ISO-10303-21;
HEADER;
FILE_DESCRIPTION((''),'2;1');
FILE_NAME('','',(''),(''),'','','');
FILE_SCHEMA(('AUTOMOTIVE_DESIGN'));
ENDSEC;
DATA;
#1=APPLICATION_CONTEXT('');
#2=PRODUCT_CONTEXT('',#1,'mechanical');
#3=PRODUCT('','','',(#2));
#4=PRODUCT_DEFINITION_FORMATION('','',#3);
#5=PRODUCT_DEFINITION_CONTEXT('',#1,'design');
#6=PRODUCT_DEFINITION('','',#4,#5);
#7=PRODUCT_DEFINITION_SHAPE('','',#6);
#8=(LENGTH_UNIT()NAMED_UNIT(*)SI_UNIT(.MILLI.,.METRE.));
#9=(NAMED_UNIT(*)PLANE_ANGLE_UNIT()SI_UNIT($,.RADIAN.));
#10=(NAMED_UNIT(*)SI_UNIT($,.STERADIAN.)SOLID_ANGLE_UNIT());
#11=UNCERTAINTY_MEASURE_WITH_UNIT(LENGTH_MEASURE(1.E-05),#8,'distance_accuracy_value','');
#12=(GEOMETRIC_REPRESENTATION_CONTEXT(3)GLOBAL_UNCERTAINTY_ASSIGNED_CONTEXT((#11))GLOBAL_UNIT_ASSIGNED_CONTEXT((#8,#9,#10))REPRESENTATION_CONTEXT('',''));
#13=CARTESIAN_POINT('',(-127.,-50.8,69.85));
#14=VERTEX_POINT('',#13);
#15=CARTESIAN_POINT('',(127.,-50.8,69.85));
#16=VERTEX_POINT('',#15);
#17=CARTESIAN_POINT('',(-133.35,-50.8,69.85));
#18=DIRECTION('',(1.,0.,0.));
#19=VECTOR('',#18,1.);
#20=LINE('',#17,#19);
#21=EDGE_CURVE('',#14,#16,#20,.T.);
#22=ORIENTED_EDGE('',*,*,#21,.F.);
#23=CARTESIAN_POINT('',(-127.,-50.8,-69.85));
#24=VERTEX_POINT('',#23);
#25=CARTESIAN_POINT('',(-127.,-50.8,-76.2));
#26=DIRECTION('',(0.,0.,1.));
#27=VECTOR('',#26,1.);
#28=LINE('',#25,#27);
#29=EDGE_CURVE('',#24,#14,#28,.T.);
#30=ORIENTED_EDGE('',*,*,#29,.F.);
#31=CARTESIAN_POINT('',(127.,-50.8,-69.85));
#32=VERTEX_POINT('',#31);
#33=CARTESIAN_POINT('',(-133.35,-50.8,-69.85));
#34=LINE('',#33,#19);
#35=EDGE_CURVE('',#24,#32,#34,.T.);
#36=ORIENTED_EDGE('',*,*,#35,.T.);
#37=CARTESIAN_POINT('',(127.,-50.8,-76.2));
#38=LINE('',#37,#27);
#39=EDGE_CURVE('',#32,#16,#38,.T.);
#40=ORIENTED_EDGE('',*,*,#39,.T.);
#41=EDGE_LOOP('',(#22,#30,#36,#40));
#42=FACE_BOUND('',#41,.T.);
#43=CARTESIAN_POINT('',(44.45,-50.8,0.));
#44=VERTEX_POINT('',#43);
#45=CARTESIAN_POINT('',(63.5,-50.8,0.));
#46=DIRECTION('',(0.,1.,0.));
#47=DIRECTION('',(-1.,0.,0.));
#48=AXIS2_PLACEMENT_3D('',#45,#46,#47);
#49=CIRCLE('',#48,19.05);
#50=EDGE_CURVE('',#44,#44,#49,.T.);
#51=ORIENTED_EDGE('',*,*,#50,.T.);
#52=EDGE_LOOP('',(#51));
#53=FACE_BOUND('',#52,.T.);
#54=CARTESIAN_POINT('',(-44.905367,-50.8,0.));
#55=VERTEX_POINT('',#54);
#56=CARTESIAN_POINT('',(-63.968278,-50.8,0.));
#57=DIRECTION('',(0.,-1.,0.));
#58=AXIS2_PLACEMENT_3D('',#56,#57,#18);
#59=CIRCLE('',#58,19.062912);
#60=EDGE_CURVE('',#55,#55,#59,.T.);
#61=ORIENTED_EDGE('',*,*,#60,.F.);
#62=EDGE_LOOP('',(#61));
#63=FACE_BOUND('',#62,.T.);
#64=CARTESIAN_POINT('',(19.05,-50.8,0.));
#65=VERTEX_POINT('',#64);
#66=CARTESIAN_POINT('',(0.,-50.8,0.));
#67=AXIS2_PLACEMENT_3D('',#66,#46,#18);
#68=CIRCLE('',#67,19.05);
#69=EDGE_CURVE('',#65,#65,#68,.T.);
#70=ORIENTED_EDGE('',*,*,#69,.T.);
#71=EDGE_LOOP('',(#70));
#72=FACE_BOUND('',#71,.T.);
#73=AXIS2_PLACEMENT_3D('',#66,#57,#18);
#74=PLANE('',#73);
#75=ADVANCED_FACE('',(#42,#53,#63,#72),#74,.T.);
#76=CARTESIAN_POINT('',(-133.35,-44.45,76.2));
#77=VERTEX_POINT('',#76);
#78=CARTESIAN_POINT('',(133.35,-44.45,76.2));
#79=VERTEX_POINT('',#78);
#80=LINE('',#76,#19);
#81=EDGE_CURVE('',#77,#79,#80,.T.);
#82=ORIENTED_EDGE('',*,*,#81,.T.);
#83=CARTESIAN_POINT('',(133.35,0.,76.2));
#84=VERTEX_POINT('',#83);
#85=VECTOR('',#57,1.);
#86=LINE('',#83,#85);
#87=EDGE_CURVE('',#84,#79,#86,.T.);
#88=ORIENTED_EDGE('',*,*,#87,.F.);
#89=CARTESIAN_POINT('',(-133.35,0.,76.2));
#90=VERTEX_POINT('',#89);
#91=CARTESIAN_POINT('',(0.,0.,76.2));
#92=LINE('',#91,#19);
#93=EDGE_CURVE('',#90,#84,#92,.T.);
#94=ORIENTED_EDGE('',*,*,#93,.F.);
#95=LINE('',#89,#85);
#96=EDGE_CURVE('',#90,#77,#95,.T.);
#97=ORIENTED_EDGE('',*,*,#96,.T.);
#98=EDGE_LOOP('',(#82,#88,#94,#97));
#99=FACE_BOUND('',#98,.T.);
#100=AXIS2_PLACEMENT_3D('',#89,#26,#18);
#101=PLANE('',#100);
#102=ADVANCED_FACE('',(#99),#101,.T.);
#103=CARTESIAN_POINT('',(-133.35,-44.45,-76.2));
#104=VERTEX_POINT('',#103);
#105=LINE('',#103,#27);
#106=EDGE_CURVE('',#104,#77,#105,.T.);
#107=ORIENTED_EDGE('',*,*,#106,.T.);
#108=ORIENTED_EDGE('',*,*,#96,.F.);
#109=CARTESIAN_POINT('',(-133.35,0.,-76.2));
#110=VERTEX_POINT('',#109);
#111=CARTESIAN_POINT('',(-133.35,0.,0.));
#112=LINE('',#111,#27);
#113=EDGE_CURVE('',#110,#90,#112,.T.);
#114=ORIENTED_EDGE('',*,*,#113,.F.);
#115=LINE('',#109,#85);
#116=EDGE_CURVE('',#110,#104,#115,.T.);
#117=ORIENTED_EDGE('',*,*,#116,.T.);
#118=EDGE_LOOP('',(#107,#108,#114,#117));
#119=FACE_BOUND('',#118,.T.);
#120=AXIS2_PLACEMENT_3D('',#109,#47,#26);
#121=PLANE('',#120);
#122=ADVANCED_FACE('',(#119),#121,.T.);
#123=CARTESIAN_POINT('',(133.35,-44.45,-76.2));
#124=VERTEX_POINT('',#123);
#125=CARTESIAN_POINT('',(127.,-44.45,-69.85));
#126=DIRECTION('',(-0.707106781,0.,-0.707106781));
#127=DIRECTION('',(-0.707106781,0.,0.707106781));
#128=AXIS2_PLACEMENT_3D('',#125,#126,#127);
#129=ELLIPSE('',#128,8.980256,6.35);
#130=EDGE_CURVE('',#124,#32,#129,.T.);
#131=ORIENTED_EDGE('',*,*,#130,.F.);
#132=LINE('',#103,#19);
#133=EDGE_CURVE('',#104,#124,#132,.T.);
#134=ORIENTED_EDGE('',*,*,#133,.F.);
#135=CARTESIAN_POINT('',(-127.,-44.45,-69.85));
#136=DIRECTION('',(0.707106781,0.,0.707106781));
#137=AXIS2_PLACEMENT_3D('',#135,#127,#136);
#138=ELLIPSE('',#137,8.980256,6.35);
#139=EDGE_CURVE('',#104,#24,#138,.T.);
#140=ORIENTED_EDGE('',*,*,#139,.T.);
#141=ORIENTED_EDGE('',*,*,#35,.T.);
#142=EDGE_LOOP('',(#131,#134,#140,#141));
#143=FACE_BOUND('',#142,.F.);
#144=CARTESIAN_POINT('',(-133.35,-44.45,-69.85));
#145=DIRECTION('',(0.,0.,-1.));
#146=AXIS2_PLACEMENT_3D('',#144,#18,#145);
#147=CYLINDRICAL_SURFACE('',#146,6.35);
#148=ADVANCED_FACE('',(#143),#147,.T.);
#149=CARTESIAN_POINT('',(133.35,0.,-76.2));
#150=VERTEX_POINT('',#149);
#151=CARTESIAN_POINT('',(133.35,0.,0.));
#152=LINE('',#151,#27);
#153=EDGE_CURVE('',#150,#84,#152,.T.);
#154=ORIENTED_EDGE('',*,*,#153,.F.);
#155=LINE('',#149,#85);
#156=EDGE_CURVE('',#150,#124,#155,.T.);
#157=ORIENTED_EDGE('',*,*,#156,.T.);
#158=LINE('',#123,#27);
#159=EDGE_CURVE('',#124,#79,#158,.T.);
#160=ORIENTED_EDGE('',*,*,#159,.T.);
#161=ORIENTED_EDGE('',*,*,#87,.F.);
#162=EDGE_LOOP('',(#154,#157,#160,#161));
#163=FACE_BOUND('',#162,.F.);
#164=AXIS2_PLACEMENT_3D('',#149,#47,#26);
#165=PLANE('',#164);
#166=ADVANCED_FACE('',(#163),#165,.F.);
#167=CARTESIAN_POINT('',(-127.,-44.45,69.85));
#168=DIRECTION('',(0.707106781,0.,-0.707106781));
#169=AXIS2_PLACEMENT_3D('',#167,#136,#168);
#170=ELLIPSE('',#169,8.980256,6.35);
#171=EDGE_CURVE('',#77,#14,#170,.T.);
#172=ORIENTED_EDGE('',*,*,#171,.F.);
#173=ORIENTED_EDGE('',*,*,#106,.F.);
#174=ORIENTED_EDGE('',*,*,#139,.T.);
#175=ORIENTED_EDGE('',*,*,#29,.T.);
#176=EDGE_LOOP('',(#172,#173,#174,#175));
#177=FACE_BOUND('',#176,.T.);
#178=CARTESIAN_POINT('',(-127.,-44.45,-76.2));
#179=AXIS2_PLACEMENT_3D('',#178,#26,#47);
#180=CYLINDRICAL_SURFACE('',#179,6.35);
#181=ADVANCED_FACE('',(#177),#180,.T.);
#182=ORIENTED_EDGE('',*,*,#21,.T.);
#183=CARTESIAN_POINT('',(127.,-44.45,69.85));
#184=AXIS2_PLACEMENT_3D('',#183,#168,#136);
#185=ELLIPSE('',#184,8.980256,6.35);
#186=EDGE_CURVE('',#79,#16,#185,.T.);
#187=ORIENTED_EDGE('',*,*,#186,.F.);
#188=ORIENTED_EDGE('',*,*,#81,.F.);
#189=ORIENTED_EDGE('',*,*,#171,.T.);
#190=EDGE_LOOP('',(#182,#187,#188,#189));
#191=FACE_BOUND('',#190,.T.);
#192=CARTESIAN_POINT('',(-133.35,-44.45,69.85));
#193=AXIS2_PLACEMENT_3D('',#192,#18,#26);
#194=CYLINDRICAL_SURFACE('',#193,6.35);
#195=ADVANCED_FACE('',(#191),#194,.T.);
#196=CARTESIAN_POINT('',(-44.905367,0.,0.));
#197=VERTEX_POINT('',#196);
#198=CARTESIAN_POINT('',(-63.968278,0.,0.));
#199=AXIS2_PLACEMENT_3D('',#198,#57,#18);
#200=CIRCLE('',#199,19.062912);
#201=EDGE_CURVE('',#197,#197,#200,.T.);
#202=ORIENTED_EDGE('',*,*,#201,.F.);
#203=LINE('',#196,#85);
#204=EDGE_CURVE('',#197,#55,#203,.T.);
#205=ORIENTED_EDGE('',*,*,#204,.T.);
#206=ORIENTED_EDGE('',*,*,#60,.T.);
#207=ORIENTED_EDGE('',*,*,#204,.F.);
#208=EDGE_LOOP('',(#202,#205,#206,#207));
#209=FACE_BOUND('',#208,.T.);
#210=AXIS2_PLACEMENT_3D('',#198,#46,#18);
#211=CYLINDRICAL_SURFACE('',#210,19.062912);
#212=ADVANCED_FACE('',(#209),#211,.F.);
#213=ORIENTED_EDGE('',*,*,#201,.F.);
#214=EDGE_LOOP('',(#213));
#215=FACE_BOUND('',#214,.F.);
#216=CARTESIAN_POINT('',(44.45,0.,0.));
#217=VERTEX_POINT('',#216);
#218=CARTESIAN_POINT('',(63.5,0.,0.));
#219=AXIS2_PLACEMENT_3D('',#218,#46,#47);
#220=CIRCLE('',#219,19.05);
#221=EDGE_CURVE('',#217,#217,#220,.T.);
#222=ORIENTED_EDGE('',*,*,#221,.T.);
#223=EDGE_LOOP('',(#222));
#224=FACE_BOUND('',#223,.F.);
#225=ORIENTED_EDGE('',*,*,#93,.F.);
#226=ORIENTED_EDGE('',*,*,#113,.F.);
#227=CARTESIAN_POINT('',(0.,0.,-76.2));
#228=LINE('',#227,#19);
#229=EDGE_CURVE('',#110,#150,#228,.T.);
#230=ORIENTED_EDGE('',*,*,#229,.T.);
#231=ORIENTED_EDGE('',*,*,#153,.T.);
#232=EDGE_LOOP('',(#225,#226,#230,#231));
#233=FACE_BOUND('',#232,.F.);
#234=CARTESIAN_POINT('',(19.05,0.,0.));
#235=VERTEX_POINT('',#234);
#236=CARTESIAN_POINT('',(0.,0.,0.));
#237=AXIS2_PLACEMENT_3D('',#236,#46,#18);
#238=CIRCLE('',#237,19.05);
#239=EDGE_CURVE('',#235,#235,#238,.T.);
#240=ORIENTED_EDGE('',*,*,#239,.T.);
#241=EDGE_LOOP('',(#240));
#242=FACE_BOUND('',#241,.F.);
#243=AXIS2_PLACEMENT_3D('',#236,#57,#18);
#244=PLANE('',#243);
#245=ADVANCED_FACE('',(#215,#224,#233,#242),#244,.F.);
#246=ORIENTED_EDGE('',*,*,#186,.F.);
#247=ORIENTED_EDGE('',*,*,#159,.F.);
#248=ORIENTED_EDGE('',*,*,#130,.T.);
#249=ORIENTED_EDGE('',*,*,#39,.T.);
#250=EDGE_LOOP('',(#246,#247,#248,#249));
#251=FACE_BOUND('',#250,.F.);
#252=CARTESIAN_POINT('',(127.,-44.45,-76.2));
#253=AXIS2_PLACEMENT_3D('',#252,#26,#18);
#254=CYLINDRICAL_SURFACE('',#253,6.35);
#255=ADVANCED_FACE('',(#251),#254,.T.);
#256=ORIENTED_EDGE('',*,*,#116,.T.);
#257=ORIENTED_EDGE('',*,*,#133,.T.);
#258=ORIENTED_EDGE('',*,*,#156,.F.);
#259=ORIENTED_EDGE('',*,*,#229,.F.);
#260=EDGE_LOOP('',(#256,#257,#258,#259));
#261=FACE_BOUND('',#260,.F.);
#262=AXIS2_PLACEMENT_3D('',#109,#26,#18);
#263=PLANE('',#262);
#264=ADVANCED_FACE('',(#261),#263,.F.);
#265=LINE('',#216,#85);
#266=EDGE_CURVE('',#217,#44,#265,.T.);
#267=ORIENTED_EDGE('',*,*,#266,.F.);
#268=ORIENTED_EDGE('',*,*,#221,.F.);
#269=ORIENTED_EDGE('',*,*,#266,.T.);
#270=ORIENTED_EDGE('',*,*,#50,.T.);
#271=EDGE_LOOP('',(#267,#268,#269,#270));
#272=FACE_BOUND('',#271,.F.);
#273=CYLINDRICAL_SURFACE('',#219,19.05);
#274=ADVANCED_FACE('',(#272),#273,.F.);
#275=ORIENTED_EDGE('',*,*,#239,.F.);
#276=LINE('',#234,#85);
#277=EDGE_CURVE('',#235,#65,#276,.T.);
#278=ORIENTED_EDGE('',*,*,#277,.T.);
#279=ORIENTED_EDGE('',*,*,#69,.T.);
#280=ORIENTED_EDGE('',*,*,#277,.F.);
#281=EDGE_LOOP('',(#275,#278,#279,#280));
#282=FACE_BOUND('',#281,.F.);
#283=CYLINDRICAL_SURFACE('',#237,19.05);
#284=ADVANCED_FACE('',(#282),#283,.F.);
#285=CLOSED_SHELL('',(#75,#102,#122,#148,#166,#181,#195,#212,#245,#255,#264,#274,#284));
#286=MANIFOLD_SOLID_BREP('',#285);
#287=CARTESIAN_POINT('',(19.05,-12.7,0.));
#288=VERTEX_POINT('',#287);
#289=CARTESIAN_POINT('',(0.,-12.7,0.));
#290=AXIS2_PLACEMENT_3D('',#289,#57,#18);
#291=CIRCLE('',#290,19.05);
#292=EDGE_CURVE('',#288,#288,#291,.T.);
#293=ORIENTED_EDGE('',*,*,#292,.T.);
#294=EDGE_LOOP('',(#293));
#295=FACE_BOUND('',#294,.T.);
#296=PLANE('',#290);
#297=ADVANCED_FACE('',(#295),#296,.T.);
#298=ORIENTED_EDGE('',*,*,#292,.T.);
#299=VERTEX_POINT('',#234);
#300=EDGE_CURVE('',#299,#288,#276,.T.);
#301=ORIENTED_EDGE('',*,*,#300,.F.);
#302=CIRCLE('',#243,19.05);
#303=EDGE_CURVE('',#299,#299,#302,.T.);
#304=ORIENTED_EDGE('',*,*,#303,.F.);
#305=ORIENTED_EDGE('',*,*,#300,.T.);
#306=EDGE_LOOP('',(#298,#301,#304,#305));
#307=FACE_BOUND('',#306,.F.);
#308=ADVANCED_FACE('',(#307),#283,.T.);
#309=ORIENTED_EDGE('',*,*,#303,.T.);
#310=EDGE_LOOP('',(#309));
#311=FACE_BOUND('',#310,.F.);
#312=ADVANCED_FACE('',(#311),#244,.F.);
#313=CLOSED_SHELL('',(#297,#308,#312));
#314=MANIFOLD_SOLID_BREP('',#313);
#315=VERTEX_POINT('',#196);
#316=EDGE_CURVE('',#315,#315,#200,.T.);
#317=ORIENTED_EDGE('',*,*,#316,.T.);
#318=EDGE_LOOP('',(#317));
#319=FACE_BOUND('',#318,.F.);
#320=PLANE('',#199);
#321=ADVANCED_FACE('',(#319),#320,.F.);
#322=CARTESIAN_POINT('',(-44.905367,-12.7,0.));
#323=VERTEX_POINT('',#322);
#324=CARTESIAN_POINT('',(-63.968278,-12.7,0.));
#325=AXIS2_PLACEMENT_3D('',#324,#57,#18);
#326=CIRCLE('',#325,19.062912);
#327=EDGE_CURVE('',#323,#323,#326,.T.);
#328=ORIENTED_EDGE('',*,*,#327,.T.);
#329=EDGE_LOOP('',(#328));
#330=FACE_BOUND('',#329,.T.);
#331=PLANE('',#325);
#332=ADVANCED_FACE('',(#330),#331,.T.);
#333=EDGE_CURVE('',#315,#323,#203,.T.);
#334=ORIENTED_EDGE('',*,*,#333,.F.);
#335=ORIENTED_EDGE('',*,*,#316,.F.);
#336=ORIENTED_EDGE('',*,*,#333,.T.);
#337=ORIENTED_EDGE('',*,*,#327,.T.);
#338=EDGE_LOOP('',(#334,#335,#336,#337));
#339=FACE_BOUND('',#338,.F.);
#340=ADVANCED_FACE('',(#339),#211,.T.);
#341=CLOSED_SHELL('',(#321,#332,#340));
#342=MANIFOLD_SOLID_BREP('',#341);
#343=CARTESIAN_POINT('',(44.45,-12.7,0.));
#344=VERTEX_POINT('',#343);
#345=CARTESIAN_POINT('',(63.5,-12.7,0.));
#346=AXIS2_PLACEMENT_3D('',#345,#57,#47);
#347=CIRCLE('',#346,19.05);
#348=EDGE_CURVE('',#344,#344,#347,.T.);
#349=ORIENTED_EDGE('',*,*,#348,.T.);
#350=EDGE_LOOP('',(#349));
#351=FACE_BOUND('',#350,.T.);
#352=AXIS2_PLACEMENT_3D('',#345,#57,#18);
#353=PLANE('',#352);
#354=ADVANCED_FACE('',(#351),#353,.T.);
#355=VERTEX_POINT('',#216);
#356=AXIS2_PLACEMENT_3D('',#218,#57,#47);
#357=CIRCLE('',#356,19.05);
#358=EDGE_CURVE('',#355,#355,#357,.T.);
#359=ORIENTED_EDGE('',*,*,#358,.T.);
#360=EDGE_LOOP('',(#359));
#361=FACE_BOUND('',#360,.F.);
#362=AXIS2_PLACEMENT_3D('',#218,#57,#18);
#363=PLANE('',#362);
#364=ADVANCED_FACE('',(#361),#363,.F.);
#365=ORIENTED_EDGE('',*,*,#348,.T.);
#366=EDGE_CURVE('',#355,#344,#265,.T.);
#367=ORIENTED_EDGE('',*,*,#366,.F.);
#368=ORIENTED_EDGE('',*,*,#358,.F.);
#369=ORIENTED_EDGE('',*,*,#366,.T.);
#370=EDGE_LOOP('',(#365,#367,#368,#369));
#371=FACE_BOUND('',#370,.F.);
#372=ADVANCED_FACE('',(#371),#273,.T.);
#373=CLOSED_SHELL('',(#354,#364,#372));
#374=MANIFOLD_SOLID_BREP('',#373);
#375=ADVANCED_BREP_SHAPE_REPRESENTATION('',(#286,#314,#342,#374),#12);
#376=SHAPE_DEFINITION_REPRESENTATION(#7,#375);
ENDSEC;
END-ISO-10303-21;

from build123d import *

# Parameters (mm, degrees)
F0_W     = 266.7
F0_H     = 152.4
F0_R     = 19.0629117812
F1_DEPTH = 50.8
F2_DEPTH = 12.7
F3_R     = 6.35


with BuildPart() as f1:
    # F0 (on Front) → F1 (new body)
    with BuildSketch(Plane.XZ):
        Rectangle(F0_W, F0_H)
        with Locations((-63.9682784677, 0)):
            Circle(F0_R, mode=Mode.SUBTRACT)
        with BuildLine():
            ThreePointArc((-19.05, 0), (0, 19.05), (19.05, 0))
            ThreePointArc((19.05, 0), (0, -19.05), (-19.05, 0))
        make_face(mode=Mode.SUBTRACT)
        with BuildLine():
            ThreePointArc((82.55, 0), (63.5, -19.05), (44.45, 0))
            ThreePointArc((44.45, 0), (63.5, 19.05), (82.55, 0))
        make_face(mode=Mode.SUBTRACT)
    extrude(amount=F1_DEPTH)

    # F3
    f3_edges = [f1.edges().sort_by_distance(p)[0] for p in [
        (0, -50.8, 76.2),
        (-133.35, -50.8, 0),
        (133.35, -50.8, 0),
        (0, -50.8, -76.2),
    ]]
    fillet(f3_edges, radius=F3_R)


with BuildPart() as f2:
    # F0 (on Front) → F2 (new body)
    with BuildSketch(Plane.XZ):
        with BuildLine():
            ThreePointArc((-19.05, 0), (0, -19.05), (19.05, 0))
            ThreePointArc((19.05, 0), (0, 19.05), (-19.05, 0))
        make_face()
    extrude(amount=F2_DEPTH)


with BuildPart() as f2b:
    # F0 (on Front) → F2, piece 2 (new body)
    with BuildSketch(Plane.XZ):
        with BuildLine():
            ThreePointArc((82.55, 0), (63.5, 19.05), (44.45, 0))
            ThreePointArc((44.45, 0), (63.5, -19.05), (82.55, 0))
        make_face()
    extrude(amount=F2_DEPTH)


with BuildPart() as f2c:
    # F0 (on Front) → F2, piece 3 (new body)
    with BuildSketch(Plane.XZ):
        with Locations((-63.9682784677, 0)):
            Circle(F0_R)
    extrude(amount=F2_DEPTH)


solid = Compound([f1.part, f2.part, f2b.part, f2c.part])
